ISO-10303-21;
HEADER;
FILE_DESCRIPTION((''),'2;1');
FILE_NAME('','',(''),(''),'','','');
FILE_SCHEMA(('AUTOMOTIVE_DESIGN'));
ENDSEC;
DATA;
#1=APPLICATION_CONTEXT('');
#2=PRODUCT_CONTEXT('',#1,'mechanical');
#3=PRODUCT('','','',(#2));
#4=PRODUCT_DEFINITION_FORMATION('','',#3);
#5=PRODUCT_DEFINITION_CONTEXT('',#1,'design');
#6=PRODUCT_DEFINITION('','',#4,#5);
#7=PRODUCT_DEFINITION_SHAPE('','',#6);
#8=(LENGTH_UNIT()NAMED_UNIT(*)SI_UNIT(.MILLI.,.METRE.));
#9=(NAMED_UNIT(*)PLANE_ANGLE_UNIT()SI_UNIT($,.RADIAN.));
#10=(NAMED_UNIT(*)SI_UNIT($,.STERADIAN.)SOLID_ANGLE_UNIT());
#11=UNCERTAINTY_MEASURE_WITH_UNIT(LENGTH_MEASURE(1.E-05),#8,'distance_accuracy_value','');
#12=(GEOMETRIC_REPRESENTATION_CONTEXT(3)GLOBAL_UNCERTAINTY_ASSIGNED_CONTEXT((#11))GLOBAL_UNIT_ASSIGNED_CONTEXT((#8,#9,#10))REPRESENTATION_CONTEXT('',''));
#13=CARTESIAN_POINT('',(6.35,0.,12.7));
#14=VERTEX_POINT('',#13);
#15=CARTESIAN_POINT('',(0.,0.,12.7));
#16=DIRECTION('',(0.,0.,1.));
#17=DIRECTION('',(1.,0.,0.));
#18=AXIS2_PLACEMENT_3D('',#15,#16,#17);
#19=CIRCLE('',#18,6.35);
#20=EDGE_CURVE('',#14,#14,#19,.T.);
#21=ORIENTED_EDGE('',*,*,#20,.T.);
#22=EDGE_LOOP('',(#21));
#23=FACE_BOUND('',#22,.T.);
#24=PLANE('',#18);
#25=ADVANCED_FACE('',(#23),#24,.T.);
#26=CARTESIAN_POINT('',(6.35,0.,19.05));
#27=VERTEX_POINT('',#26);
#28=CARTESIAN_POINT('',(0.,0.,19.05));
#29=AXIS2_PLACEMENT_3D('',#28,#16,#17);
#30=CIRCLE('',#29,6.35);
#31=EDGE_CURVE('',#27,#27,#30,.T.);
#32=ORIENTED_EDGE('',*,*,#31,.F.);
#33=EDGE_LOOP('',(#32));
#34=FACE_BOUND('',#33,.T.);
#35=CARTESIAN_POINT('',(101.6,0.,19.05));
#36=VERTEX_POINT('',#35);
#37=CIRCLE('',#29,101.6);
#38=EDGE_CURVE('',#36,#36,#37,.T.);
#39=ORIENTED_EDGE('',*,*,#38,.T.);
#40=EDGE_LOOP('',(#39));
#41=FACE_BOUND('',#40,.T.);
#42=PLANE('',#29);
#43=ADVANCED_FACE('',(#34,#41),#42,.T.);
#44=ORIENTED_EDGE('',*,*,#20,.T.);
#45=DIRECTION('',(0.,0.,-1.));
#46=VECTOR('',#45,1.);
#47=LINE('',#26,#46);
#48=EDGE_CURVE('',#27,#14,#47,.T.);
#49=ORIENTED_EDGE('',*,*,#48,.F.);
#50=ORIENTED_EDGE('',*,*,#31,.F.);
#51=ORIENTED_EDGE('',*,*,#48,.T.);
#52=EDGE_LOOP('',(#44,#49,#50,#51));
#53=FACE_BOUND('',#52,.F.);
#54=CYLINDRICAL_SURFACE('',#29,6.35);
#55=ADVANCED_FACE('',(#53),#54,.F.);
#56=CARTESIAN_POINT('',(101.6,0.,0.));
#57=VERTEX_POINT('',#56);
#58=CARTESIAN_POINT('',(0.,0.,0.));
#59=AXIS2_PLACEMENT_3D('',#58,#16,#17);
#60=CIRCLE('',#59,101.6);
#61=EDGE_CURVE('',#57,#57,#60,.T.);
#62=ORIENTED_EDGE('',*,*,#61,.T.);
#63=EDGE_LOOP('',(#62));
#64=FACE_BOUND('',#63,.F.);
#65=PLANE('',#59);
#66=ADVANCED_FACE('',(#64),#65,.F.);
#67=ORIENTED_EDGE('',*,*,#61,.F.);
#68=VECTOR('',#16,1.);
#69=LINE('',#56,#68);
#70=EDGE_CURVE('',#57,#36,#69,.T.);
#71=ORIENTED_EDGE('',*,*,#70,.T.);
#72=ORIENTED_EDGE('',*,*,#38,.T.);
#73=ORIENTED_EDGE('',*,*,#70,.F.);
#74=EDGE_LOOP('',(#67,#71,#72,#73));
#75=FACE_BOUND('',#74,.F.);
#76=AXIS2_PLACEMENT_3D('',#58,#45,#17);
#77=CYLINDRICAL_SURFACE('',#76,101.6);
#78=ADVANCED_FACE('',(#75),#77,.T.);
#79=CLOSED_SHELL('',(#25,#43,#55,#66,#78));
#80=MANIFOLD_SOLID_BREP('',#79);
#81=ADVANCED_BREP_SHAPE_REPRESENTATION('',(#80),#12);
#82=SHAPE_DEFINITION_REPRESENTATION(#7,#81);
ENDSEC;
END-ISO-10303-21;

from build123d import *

# Parameters (mm, degrees)
F0_R     = 101.6
F1_DEPTH = 19.05
F2_R     = 6.35
F3_DEPTH = 6.35


# Not quite as in the source:
# - a length typed as a fraction of an inch, garbled in the dataset ("3 / 203.2 mm" for 3/8 in), is restored


with BuildPart() as f1:
    # F0 (on Top) → F1 (new body)
    with BuildSketch(Plane.XY):
        Circle(F0_R)
    extrude(amount=F1_DEPTH)

    # F2 (on face) → F3 (cut)
    with BuildSketch(Plane.XY.offset(19.05)):
        Circle(F2_R)
    extrude(amount=-F3_DEPTH, mode=Mode.SUBTRACT)


solid = f1.part
